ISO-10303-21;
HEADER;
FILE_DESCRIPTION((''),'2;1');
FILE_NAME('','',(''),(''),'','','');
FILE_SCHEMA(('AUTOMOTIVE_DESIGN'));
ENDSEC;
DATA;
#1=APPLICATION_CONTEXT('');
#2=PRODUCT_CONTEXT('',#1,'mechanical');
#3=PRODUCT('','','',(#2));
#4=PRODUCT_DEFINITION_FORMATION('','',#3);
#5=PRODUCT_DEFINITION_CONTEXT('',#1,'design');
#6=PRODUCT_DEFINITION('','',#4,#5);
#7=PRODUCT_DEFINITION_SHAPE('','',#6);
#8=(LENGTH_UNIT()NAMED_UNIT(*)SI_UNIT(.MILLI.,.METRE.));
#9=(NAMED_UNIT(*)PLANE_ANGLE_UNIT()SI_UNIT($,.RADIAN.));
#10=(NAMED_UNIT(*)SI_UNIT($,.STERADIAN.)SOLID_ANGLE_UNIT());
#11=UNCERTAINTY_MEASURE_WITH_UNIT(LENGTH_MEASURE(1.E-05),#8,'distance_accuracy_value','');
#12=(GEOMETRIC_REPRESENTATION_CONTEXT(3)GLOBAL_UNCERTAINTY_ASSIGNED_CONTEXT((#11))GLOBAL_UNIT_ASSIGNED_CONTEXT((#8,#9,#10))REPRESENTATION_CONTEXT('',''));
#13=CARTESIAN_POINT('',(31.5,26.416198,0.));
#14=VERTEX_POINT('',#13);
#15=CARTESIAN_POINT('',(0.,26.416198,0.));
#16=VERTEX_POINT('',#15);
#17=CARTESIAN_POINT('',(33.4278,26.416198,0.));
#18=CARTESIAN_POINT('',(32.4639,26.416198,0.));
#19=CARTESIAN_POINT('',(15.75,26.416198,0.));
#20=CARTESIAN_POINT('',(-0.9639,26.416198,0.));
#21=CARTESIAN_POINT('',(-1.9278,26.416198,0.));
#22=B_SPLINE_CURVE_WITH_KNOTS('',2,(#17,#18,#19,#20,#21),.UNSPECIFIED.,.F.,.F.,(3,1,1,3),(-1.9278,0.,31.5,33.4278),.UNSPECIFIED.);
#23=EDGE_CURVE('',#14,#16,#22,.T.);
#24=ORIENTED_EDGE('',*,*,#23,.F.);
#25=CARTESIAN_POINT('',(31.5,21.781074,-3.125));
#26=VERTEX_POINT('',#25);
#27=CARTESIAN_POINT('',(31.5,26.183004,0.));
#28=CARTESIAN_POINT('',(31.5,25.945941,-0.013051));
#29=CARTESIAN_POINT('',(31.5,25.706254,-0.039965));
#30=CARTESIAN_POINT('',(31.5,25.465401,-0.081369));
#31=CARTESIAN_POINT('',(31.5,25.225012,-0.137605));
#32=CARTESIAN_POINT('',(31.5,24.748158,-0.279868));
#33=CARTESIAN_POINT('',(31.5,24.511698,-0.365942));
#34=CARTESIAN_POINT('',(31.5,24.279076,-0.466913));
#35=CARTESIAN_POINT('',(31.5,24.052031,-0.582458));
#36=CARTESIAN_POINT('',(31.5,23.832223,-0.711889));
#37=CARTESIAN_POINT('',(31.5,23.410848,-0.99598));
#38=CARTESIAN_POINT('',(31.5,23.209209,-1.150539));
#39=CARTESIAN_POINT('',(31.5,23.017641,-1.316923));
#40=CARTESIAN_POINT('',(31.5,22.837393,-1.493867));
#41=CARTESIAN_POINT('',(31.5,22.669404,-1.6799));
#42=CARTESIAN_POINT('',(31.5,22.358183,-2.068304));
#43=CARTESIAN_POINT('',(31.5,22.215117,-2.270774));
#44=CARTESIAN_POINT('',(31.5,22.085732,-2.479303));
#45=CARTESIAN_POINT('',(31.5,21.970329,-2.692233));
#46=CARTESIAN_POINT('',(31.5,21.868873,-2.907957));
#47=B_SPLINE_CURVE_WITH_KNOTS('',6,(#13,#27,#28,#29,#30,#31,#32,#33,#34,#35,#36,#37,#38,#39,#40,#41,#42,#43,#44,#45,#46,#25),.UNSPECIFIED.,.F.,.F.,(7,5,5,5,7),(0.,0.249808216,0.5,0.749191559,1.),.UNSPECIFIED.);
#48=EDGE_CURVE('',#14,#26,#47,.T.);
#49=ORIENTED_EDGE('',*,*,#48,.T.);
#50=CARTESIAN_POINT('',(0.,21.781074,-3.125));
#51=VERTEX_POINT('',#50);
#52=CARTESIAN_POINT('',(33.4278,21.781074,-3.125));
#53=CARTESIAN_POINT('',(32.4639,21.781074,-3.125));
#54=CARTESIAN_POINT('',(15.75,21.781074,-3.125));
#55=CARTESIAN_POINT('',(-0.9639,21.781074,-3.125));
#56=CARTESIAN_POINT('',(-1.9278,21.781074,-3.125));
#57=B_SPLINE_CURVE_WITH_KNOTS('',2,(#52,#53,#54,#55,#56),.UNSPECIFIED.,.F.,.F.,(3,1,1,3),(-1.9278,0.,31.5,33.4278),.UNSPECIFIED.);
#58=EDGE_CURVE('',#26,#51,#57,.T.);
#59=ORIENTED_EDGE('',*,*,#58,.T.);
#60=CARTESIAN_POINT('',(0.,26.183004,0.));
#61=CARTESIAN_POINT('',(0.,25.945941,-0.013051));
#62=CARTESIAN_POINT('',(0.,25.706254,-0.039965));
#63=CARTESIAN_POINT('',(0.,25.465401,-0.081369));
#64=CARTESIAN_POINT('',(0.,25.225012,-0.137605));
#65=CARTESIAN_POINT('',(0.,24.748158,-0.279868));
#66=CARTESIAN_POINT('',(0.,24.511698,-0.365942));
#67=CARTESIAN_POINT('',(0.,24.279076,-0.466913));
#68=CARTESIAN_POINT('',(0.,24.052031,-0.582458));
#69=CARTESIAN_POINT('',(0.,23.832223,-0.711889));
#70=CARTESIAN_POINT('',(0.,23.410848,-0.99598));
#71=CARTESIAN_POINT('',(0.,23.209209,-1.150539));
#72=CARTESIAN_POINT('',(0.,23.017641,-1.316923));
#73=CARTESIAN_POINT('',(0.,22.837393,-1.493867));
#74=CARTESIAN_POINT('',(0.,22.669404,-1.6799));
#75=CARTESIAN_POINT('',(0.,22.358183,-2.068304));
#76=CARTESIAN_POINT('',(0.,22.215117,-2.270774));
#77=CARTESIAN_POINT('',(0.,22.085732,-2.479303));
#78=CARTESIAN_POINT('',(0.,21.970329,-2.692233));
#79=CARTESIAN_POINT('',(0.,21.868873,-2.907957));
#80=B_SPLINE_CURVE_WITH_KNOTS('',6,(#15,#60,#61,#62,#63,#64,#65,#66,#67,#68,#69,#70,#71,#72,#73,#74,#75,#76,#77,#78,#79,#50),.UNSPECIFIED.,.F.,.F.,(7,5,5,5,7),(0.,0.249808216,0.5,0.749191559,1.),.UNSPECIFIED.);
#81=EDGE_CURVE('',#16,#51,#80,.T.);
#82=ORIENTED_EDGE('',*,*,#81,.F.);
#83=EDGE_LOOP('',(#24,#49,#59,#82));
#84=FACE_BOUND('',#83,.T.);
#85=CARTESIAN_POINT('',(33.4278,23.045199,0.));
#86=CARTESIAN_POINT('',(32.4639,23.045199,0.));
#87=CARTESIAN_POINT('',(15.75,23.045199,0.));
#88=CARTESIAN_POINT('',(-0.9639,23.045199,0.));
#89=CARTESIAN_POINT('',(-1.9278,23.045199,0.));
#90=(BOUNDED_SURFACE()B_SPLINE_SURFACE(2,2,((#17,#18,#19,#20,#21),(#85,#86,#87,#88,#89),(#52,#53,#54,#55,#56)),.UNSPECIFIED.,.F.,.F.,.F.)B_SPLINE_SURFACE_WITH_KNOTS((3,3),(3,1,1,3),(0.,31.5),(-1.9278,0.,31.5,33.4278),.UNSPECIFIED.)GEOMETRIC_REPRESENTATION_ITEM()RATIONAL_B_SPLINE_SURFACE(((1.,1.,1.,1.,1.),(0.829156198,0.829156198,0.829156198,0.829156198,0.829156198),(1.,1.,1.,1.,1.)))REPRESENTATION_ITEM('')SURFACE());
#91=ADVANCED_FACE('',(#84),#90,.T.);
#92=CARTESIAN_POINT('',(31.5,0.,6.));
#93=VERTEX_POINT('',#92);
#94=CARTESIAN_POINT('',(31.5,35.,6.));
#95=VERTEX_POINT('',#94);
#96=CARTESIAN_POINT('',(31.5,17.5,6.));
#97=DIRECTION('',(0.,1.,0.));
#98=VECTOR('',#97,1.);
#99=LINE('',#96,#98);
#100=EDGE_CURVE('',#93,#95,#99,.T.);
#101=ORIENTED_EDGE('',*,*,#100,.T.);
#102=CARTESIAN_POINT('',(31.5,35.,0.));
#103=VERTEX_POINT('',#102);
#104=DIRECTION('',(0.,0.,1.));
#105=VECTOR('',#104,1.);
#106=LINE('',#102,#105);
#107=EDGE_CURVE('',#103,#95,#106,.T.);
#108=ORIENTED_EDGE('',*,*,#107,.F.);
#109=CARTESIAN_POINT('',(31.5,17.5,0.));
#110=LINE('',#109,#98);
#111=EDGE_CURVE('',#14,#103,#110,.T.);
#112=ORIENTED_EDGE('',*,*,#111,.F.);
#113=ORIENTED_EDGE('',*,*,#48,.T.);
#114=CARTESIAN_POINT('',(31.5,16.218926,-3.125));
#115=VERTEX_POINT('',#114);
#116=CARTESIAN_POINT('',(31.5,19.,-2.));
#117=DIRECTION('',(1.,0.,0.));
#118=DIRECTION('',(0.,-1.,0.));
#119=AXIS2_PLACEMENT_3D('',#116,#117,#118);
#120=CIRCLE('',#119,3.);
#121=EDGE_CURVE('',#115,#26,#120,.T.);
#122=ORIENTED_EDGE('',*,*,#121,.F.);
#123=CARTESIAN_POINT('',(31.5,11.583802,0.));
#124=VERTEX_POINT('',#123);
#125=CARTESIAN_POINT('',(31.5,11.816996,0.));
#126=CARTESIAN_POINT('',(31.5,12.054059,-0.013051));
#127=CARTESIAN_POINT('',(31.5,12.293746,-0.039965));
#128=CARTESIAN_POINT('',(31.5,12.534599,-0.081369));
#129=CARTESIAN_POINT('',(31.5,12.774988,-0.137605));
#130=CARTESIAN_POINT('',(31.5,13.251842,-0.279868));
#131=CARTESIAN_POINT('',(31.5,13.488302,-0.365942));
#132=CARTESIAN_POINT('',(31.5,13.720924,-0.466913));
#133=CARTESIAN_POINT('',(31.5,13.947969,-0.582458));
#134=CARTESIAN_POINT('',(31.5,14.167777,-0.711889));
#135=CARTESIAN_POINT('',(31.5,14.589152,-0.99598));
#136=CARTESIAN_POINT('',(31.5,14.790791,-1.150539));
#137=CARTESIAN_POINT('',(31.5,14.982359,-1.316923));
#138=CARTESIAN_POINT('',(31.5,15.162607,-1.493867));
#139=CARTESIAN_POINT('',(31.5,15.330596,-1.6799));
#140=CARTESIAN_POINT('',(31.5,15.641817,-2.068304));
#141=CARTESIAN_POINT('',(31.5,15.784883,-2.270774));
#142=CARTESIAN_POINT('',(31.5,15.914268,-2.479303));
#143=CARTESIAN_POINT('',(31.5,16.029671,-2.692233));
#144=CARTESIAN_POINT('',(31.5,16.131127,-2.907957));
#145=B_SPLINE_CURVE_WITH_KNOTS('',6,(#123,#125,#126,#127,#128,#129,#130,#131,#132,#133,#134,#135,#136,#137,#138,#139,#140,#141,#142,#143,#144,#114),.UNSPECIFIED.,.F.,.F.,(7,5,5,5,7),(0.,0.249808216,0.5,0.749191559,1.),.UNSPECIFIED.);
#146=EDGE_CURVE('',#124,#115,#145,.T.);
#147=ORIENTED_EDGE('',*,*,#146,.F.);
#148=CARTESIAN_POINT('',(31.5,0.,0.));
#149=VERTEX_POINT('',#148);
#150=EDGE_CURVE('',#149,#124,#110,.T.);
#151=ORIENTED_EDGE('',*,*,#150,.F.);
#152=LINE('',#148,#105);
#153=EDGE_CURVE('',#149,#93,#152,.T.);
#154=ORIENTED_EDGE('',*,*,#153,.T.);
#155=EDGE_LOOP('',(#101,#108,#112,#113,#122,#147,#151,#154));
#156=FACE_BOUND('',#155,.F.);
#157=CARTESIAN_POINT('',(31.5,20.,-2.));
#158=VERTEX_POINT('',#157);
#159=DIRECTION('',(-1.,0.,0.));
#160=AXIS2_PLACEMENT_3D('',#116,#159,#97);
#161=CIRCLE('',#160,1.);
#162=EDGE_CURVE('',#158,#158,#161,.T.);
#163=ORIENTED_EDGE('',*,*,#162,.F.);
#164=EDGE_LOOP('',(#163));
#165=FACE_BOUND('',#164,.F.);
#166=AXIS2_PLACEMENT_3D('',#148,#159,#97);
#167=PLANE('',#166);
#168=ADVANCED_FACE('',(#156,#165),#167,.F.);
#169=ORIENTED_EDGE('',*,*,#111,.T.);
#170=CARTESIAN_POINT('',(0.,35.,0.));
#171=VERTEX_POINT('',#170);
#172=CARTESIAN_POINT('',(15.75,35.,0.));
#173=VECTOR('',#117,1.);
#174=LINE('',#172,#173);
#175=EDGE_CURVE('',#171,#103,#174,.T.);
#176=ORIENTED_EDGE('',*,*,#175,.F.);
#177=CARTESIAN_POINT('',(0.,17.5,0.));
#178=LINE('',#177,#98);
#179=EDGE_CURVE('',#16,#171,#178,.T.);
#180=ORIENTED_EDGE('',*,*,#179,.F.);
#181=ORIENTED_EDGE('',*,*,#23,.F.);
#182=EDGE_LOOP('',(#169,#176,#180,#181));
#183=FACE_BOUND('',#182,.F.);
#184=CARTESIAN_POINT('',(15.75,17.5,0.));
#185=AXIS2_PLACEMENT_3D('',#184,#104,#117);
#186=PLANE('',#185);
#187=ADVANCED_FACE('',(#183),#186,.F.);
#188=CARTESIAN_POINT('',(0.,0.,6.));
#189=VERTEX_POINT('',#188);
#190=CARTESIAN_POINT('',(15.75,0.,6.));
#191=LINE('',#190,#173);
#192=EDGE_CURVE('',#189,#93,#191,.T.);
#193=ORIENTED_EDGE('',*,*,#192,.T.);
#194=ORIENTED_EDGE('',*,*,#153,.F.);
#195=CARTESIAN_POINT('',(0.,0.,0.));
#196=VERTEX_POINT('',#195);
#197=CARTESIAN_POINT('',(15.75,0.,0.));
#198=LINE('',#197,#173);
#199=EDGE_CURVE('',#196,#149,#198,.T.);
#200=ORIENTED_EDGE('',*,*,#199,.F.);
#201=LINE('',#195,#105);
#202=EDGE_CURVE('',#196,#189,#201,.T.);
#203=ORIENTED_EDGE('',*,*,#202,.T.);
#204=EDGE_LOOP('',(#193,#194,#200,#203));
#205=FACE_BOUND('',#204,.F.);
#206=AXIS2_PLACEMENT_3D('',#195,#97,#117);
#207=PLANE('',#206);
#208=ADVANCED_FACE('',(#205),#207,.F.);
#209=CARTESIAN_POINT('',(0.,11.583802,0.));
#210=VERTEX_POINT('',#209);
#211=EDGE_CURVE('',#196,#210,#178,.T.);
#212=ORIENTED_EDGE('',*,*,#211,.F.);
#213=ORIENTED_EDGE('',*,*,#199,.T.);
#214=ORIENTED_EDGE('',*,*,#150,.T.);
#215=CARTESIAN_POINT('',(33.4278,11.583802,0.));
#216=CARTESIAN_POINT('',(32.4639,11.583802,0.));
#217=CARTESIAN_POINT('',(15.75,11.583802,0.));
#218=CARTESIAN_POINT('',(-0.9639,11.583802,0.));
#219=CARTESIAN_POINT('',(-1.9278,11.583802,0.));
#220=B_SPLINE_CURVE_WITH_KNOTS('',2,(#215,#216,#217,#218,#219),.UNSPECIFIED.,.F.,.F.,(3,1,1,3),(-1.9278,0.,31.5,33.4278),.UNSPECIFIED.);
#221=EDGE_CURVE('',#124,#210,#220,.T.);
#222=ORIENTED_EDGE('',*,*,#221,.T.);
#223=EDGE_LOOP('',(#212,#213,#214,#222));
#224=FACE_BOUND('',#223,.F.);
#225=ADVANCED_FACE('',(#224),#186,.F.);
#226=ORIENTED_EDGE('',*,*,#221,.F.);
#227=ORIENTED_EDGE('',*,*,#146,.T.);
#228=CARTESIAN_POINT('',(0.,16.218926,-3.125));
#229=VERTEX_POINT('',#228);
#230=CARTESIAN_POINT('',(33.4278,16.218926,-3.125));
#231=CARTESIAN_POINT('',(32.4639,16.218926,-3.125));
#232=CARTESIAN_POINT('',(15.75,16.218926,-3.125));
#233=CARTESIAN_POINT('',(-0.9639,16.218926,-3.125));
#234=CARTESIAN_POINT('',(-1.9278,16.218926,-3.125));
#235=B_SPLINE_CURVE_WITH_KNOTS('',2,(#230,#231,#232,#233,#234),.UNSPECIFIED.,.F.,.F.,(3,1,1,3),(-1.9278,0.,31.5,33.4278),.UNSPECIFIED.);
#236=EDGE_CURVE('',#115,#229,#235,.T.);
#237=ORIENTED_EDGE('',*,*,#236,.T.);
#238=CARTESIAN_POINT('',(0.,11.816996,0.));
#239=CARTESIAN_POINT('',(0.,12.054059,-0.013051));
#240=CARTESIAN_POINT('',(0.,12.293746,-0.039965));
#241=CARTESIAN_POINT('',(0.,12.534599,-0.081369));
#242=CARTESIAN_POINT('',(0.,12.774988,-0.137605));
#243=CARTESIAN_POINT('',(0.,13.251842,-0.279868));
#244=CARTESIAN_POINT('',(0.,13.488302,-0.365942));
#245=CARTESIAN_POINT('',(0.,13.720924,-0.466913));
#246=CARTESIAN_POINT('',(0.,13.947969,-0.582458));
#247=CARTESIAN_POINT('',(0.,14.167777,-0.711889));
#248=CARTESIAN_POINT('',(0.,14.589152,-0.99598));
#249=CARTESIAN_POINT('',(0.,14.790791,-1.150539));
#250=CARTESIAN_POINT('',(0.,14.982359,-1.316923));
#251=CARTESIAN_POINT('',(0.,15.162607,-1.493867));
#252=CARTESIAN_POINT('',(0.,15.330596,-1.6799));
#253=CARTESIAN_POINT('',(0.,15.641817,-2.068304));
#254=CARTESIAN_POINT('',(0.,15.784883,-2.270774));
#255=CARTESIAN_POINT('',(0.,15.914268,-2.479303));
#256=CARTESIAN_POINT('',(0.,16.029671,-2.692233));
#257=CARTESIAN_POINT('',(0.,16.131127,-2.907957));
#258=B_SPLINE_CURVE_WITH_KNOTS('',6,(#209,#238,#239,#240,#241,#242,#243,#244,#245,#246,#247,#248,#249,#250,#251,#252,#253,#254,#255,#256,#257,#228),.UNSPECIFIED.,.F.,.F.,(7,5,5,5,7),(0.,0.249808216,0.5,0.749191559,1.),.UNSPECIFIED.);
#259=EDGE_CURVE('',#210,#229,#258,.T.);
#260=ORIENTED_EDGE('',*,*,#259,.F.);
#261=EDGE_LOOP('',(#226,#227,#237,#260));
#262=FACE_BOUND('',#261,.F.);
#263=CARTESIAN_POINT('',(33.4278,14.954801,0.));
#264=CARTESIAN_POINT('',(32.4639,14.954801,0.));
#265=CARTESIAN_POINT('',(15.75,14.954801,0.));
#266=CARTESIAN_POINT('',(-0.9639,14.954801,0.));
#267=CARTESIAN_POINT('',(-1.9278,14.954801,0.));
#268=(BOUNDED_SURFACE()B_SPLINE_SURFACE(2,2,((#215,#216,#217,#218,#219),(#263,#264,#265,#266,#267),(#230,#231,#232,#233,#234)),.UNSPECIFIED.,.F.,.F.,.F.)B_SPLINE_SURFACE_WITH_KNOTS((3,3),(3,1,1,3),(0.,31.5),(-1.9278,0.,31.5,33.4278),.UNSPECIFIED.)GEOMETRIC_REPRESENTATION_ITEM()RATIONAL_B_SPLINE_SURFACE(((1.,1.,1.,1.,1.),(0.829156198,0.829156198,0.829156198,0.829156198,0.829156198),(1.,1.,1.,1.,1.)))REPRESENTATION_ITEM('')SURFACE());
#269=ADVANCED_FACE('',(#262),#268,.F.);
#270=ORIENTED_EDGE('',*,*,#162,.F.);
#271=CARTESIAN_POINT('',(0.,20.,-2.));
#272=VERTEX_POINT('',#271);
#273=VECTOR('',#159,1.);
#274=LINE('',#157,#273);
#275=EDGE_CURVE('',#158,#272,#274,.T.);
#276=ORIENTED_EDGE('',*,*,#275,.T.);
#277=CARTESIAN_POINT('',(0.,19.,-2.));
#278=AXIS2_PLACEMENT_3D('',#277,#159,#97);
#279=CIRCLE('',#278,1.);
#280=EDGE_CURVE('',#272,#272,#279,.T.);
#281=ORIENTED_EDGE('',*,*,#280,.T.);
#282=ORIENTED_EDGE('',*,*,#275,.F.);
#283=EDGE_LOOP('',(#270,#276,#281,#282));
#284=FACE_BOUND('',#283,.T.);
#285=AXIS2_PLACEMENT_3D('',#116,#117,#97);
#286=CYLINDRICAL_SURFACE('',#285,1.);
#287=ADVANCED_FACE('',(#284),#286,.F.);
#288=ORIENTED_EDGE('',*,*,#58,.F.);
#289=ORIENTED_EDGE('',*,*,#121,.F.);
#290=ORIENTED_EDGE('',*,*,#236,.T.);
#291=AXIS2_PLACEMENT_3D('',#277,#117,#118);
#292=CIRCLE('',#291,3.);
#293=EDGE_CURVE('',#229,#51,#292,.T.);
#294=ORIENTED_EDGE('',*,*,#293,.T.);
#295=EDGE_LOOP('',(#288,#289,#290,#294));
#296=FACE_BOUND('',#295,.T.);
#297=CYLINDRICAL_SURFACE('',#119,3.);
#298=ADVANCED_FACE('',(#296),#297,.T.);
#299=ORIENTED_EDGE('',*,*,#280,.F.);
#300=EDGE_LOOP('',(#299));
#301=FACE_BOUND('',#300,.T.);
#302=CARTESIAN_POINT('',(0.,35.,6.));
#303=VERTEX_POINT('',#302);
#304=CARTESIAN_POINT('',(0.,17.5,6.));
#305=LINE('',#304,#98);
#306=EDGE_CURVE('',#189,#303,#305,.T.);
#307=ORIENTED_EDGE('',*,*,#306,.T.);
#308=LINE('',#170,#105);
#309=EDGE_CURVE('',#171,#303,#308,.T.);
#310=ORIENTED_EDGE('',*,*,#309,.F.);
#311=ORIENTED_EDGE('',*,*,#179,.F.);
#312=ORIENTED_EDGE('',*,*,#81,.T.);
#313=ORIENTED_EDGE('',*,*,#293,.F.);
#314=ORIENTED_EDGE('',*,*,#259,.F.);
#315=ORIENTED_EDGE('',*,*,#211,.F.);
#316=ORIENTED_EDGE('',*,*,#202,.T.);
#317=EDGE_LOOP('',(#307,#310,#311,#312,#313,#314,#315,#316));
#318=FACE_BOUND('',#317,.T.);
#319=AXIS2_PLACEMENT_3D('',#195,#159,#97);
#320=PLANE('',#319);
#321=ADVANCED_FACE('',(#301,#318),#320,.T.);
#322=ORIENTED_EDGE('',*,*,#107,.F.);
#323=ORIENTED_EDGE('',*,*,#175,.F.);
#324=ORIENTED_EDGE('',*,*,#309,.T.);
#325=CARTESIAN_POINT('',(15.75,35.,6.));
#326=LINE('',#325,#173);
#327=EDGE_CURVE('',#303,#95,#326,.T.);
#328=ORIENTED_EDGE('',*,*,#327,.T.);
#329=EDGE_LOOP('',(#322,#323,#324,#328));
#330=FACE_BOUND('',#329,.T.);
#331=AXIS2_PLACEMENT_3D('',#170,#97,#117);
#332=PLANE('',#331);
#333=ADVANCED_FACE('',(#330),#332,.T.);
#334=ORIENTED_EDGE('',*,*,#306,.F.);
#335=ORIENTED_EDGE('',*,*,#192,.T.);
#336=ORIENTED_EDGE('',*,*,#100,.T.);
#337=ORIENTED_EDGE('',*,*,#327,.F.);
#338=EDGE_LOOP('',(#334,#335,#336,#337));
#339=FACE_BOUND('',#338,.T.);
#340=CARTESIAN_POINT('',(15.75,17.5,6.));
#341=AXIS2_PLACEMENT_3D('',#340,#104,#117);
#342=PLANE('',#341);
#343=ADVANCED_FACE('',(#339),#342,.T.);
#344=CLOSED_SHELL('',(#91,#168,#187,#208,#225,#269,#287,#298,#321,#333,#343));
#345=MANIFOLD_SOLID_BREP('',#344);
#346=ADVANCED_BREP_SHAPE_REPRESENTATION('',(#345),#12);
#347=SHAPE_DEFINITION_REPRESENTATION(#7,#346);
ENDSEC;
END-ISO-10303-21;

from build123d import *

# Parameters (mm, degrees)
F0_W     = 31.5
F0_H     = 35
F1_DEPTH = 6
F3_DEPTH = 31.5
F4_R     = 5


# Not quite as in the source:
# - a feature of the source that left no trace in its solid (it failed there, or was rolled back) is left out


with BuildPart() as f1:
    # F0 (on Top) → F1 (new body)
    with BuildSketch(Plane.XY):
        with Locations((15.75, 17.5)):
            Rectangle(F0_W, F0_H)
    extrude(amount=F1_DEPTH)

    # F2 (on face) → F3 (join, through all)
    with BuildSketch(Plane.YZ.offset(31.5)):
        with BuildLine():
            Line((22, -2), (22, 0))
            Line((22, 0), (16, 0))
            Line((16, 0), (16, -2))
            Line((16, -2), (18, -2))
            ThreePointArc((18, -2), (19, -1), (20, -2))
            Line((20, -2), (22, -2))
        make_face()
        with BuildLine():
            ThreePointArc((16, -2), (19, -5), (22, -2))
            Line((22, -2), (20, -2))
            ThreePointArc((20, -2), (19, -3), (18, -2))
            Line((18, -2), (16, -2))
        make_face()
    extrude(amount=-F3_DEPTH)

    # F4
    f4_edges = [f1.edges().sort_by_distance(p)[0] for p in [
        (15.75, 22, 0),
        (15.75, 16, 0),
    ]]
    fillet(f4_edges, radius=F4_R)


solid = f1.part
